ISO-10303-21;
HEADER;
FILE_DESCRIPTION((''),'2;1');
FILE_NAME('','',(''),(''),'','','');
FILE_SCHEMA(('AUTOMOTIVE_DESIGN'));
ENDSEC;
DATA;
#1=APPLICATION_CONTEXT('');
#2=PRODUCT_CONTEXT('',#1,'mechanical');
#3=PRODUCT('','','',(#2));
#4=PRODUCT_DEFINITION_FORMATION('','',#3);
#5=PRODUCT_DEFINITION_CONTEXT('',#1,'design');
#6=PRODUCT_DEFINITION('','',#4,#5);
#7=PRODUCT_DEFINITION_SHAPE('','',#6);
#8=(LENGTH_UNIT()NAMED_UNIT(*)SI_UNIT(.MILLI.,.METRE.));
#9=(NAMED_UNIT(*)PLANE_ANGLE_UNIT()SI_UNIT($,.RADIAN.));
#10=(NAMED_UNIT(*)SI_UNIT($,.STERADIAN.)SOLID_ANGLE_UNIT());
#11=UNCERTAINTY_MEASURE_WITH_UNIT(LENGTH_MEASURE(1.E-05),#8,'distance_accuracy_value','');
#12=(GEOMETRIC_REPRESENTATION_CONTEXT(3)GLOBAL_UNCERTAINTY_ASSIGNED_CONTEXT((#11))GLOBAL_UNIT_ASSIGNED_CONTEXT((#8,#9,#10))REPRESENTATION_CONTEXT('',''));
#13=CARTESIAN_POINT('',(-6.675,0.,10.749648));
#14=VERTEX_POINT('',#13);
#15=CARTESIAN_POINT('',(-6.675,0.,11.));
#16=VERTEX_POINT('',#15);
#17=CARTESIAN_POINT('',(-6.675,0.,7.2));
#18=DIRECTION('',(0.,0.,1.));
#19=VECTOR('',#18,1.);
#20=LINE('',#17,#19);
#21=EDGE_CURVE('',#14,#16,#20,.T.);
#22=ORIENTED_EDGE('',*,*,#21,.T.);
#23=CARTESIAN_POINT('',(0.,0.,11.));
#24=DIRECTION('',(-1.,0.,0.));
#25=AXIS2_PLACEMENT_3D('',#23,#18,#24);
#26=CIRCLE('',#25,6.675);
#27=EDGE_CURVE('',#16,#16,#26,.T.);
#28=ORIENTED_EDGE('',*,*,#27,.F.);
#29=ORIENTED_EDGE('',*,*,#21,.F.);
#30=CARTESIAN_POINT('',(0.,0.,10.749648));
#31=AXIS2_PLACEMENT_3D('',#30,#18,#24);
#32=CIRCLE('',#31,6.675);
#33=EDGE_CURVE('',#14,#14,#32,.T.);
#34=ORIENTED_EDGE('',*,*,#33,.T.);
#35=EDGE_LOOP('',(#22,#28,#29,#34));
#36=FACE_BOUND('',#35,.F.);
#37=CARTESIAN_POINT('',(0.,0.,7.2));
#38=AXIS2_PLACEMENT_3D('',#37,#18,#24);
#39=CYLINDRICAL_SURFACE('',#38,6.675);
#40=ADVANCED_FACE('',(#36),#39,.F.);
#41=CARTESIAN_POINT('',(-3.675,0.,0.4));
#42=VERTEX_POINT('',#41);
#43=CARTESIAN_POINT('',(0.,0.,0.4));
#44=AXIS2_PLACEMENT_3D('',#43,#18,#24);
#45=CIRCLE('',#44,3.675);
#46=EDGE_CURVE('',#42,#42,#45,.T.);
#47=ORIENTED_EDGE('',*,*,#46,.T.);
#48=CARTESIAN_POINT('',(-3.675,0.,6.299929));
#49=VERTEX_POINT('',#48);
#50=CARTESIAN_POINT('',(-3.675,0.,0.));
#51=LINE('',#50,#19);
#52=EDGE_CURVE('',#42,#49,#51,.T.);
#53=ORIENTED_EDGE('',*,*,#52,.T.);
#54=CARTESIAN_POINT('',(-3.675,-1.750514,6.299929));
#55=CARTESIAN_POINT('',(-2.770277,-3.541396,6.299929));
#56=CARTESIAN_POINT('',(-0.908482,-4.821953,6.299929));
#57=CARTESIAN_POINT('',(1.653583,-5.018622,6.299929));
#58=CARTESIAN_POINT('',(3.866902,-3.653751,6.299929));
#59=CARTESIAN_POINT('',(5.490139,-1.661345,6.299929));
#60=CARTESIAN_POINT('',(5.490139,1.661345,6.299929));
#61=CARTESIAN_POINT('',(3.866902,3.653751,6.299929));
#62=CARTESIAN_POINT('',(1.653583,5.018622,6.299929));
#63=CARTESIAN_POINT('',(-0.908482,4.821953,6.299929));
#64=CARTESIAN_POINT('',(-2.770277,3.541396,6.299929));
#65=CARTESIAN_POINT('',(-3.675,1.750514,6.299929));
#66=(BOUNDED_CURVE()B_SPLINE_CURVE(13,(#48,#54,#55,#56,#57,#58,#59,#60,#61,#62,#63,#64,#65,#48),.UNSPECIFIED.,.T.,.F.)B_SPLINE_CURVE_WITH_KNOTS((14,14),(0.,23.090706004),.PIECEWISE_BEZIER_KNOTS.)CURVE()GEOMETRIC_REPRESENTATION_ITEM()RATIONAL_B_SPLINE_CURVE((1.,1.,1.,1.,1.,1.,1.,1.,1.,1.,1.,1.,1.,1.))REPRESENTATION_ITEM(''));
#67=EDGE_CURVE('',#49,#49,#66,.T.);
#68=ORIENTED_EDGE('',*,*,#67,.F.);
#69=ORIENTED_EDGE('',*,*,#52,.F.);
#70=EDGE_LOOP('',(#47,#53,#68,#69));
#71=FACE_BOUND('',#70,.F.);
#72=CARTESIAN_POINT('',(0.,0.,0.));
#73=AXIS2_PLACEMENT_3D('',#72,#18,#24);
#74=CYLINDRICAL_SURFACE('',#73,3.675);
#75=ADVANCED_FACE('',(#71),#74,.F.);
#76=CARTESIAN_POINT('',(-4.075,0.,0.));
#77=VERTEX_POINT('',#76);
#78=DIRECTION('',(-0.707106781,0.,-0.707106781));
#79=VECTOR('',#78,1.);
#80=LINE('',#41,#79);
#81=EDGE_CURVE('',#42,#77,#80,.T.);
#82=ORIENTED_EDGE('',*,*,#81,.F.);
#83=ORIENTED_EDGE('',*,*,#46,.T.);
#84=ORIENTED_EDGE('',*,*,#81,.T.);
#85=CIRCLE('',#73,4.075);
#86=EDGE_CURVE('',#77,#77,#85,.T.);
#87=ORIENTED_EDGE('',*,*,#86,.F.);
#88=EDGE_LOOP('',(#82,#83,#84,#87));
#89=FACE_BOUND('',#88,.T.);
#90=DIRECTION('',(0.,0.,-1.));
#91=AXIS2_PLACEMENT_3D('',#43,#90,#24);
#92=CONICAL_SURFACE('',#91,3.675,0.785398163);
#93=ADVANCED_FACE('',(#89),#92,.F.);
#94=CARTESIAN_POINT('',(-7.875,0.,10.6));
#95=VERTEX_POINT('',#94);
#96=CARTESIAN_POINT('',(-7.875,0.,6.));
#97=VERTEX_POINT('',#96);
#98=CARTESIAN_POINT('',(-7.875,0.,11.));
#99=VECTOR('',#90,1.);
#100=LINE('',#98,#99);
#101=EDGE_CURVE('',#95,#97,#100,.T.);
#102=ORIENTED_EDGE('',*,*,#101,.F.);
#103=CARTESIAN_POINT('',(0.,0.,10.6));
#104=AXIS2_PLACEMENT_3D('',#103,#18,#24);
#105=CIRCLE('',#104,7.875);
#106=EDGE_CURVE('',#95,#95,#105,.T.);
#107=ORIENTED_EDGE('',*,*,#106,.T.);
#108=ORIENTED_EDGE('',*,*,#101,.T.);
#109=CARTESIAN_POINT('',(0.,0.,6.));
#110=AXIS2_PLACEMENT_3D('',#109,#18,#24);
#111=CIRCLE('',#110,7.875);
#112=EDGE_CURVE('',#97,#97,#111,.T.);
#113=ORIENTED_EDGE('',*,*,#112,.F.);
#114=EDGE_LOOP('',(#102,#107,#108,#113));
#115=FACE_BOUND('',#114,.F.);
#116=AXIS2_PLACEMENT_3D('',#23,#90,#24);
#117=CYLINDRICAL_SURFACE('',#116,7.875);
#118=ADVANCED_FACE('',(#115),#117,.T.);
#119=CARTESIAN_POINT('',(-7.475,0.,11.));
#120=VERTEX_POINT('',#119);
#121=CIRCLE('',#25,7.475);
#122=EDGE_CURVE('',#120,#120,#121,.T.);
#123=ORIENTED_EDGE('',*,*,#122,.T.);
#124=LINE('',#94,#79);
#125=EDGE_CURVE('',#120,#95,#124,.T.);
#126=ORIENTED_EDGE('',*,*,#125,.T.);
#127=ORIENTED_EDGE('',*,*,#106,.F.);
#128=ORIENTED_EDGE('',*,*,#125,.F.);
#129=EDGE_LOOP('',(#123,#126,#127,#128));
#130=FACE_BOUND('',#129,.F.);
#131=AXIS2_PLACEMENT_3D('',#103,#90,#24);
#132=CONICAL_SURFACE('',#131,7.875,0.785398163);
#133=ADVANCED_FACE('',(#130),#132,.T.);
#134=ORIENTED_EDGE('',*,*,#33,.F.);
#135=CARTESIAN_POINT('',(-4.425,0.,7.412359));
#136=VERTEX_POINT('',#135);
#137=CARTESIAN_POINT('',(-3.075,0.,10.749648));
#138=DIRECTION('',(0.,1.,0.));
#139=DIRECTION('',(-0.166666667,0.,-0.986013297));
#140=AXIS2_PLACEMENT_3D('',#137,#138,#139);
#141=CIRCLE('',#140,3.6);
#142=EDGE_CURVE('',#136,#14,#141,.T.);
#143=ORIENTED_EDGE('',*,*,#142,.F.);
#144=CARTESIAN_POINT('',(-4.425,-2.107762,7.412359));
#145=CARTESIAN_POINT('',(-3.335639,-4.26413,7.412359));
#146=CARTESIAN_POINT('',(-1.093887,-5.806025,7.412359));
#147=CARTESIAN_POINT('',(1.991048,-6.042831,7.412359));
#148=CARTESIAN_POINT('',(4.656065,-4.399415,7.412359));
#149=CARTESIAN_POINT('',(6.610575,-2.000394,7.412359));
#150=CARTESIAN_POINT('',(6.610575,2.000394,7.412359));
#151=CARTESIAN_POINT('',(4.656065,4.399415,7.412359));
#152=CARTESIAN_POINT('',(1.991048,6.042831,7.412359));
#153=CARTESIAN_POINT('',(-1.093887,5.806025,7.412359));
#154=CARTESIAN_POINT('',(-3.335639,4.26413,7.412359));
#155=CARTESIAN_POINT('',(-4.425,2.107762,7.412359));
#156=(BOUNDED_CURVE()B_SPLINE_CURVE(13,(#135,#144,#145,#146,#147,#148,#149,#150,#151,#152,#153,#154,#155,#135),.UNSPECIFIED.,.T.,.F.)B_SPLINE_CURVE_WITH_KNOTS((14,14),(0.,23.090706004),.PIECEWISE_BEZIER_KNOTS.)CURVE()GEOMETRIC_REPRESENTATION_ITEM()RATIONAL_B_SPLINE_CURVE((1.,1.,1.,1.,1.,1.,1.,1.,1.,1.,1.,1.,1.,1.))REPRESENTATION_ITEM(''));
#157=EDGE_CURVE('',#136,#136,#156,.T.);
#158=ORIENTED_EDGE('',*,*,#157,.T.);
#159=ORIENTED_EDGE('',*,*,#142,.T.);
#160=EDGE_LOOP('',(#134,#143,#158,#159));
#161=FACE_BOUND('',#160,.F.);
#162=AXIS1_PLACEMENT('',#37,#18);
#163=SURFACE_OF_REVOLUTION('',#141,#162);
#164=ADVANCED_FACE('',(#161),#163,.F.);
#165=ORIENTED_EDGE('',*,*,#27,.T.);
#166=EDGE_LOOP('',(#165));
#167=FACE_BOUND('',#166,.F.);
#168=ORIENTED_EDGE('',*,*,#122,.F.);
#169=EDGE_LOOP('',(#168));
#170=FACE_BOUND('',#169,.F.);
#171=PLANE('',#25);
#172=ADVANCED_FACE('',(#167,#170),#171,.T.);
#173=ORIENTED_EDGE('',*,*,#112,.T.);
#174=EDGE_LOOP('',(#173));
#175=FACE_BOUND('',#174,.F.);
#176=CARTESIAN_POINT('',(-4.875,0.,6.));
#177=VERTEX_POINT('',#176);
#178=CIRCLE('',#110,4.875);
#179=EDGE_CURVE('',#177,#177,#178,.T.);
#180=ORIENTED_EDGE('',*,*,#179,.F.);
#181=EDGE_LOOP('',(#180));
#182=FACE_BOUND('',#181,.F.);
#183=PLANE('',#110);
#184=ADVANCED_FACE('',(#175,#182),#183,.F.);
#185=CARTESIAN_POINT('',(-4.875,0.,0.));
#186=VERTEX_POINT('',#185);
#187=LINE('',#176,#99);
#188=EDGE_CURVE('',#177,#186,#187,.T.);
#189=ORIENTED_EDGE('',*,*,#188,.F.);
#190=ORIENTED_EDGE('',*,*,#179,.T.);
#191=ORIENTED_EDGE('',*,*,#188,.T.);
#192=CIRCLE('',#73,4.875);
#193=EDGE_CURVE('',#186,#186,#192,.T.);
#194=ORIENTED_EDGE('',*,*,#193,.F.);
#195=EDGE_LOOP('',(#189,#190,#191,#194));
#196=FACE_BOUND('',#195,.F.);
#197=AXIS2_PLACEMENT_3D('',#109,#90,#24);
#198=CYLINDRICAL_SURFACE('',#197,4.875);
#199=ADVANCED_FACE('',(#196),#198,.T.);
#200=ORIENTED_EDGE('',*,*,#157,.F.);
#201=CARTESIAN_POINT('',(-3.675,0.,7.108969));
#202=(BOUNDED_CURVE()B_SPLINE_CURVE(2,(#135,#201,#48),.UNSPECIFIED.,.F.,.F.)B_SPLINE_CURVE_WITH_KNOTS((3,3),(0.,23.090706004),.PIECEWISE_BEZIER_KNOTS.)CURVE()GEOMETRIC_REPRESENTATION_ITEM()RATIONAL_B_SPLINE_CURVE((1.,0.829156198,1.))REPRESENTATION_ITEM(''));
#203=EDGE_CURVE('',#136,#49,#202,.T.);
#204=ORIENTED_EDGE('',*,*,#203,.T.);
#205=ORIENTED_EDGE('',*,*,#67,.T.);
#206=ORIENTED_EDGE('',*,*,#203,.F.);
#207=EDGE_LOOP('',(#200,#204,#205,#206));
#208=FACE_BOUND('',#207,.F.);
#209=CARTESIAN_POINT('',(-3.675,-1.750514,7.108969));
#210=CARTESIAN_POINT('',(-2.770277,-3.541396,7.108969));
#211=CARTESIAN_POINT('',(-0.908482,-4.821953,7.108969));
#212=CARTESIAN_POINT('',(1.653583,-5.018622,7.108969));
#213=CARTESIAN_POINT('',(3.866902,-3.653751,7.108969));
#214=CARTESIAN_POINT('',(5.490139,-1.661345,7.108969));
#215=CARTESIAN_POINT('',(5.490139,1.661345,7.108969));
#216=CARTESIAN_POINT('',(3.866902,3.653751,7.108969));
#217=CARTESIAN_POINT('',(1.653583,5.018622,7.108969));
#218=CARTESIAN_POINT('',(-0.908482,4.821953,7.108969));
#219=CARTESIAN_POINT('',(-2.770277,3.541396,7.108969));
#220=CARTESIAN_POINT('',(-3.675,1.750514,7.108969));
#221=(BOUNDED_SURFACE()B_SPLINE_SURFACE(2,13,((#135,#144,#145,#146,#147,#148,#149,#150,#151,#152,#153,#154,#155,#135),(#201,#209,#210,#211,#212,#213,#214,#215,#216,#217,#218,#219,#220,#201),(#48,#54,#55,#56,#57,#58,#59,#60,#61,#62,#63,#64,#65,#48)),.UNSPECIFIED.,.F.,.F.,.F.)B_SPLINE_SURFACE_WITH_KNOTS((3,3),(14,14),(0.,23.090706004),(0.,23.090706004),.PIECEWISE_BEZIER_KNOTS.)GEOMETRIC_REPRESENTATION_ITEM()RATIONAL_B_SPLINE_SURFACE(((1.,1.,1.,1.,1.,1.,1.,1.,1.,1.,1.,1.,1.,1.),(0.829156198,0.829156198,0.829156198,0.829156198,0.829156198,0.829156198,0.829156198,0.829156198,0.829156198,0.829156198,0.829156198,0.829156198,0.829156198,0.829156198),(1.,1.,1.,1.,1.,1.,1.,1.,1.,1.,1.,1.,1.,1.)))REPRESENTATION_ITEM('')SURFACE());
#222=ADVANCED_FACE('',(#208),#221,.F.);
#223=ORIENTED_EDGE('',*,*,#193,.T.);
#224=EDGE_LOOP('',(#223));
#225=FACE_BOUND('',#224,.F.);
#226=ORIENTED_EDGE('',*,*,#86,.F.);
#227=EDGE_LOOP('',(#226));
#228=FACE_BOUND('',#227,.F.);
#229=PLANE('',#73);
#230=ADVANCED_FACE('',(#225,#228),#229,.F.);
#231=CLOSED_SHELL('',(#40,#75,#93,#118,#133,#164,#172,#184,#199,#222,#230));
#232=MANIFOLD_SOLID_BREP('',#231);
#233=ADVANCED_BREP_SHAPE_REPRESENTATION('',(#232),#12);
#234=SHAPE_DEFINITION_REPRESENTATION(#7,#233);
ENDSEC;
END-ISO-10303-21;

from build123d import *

# Parameters (mm, degrees)
F3_R    = 1.2
F4_SIZE = 0.4


# Not quite as in the source:
# - a fillet or chamfer that OpenCascade refuses, or shapes differently, is made with other operations: its cross-section is extruded or revolved along the edge and cut away or added


with BuildPart() as f1:
    # F0 (on Front) → F1 (revolve)
    with BuildSketch(Plane.XZ):
        Polygon((-4.875, 6), (-4.875, 0), (-3.675, 0), (-3.675, 7.2), (-6.675, 7.2), (-6.675, 11), (-7.875, 11), (-7.875, 6), align=None)
    revolve(axis=Axis((0, 0, 5.5), (0, 0, 1)))

    # F2: fillet of radius 3.6 on 1 edges, made by hand

    # F2_s1 → F2_t2 (revolve)
    with BuildSketch(Plane.XZ):
        with BuildLine():
            ThreePointArc((-3.675, 7.2), (-5.824545417, 8.4258578621), (-6.675, 10.7496478699))
            Line((-6.675, 10.7496478699), (-6.675, 7.2))
            Line((-6.675, 7.2), (-3.675, 7.2))
        make_face()
    revolve(axis=Axis((0, 0, 7.2), (0, 0, 1)))

    # F3
    f3_edges = [f1.edges().sort_by_distance(p)[0] for p in [
        (3.675, 0, 7.2),
    ]]
    fillet(f3_edges, radius=F3_R)

    # F4
    f4_edges = [f1.edges().sort_by_distance(p)[0] for p in [
        (7.875, 0, 11),
        (3.675, 0, 0),
    ]]
    chamfer(f4_edges, length=F4_SIZE)


solid = f1.part
